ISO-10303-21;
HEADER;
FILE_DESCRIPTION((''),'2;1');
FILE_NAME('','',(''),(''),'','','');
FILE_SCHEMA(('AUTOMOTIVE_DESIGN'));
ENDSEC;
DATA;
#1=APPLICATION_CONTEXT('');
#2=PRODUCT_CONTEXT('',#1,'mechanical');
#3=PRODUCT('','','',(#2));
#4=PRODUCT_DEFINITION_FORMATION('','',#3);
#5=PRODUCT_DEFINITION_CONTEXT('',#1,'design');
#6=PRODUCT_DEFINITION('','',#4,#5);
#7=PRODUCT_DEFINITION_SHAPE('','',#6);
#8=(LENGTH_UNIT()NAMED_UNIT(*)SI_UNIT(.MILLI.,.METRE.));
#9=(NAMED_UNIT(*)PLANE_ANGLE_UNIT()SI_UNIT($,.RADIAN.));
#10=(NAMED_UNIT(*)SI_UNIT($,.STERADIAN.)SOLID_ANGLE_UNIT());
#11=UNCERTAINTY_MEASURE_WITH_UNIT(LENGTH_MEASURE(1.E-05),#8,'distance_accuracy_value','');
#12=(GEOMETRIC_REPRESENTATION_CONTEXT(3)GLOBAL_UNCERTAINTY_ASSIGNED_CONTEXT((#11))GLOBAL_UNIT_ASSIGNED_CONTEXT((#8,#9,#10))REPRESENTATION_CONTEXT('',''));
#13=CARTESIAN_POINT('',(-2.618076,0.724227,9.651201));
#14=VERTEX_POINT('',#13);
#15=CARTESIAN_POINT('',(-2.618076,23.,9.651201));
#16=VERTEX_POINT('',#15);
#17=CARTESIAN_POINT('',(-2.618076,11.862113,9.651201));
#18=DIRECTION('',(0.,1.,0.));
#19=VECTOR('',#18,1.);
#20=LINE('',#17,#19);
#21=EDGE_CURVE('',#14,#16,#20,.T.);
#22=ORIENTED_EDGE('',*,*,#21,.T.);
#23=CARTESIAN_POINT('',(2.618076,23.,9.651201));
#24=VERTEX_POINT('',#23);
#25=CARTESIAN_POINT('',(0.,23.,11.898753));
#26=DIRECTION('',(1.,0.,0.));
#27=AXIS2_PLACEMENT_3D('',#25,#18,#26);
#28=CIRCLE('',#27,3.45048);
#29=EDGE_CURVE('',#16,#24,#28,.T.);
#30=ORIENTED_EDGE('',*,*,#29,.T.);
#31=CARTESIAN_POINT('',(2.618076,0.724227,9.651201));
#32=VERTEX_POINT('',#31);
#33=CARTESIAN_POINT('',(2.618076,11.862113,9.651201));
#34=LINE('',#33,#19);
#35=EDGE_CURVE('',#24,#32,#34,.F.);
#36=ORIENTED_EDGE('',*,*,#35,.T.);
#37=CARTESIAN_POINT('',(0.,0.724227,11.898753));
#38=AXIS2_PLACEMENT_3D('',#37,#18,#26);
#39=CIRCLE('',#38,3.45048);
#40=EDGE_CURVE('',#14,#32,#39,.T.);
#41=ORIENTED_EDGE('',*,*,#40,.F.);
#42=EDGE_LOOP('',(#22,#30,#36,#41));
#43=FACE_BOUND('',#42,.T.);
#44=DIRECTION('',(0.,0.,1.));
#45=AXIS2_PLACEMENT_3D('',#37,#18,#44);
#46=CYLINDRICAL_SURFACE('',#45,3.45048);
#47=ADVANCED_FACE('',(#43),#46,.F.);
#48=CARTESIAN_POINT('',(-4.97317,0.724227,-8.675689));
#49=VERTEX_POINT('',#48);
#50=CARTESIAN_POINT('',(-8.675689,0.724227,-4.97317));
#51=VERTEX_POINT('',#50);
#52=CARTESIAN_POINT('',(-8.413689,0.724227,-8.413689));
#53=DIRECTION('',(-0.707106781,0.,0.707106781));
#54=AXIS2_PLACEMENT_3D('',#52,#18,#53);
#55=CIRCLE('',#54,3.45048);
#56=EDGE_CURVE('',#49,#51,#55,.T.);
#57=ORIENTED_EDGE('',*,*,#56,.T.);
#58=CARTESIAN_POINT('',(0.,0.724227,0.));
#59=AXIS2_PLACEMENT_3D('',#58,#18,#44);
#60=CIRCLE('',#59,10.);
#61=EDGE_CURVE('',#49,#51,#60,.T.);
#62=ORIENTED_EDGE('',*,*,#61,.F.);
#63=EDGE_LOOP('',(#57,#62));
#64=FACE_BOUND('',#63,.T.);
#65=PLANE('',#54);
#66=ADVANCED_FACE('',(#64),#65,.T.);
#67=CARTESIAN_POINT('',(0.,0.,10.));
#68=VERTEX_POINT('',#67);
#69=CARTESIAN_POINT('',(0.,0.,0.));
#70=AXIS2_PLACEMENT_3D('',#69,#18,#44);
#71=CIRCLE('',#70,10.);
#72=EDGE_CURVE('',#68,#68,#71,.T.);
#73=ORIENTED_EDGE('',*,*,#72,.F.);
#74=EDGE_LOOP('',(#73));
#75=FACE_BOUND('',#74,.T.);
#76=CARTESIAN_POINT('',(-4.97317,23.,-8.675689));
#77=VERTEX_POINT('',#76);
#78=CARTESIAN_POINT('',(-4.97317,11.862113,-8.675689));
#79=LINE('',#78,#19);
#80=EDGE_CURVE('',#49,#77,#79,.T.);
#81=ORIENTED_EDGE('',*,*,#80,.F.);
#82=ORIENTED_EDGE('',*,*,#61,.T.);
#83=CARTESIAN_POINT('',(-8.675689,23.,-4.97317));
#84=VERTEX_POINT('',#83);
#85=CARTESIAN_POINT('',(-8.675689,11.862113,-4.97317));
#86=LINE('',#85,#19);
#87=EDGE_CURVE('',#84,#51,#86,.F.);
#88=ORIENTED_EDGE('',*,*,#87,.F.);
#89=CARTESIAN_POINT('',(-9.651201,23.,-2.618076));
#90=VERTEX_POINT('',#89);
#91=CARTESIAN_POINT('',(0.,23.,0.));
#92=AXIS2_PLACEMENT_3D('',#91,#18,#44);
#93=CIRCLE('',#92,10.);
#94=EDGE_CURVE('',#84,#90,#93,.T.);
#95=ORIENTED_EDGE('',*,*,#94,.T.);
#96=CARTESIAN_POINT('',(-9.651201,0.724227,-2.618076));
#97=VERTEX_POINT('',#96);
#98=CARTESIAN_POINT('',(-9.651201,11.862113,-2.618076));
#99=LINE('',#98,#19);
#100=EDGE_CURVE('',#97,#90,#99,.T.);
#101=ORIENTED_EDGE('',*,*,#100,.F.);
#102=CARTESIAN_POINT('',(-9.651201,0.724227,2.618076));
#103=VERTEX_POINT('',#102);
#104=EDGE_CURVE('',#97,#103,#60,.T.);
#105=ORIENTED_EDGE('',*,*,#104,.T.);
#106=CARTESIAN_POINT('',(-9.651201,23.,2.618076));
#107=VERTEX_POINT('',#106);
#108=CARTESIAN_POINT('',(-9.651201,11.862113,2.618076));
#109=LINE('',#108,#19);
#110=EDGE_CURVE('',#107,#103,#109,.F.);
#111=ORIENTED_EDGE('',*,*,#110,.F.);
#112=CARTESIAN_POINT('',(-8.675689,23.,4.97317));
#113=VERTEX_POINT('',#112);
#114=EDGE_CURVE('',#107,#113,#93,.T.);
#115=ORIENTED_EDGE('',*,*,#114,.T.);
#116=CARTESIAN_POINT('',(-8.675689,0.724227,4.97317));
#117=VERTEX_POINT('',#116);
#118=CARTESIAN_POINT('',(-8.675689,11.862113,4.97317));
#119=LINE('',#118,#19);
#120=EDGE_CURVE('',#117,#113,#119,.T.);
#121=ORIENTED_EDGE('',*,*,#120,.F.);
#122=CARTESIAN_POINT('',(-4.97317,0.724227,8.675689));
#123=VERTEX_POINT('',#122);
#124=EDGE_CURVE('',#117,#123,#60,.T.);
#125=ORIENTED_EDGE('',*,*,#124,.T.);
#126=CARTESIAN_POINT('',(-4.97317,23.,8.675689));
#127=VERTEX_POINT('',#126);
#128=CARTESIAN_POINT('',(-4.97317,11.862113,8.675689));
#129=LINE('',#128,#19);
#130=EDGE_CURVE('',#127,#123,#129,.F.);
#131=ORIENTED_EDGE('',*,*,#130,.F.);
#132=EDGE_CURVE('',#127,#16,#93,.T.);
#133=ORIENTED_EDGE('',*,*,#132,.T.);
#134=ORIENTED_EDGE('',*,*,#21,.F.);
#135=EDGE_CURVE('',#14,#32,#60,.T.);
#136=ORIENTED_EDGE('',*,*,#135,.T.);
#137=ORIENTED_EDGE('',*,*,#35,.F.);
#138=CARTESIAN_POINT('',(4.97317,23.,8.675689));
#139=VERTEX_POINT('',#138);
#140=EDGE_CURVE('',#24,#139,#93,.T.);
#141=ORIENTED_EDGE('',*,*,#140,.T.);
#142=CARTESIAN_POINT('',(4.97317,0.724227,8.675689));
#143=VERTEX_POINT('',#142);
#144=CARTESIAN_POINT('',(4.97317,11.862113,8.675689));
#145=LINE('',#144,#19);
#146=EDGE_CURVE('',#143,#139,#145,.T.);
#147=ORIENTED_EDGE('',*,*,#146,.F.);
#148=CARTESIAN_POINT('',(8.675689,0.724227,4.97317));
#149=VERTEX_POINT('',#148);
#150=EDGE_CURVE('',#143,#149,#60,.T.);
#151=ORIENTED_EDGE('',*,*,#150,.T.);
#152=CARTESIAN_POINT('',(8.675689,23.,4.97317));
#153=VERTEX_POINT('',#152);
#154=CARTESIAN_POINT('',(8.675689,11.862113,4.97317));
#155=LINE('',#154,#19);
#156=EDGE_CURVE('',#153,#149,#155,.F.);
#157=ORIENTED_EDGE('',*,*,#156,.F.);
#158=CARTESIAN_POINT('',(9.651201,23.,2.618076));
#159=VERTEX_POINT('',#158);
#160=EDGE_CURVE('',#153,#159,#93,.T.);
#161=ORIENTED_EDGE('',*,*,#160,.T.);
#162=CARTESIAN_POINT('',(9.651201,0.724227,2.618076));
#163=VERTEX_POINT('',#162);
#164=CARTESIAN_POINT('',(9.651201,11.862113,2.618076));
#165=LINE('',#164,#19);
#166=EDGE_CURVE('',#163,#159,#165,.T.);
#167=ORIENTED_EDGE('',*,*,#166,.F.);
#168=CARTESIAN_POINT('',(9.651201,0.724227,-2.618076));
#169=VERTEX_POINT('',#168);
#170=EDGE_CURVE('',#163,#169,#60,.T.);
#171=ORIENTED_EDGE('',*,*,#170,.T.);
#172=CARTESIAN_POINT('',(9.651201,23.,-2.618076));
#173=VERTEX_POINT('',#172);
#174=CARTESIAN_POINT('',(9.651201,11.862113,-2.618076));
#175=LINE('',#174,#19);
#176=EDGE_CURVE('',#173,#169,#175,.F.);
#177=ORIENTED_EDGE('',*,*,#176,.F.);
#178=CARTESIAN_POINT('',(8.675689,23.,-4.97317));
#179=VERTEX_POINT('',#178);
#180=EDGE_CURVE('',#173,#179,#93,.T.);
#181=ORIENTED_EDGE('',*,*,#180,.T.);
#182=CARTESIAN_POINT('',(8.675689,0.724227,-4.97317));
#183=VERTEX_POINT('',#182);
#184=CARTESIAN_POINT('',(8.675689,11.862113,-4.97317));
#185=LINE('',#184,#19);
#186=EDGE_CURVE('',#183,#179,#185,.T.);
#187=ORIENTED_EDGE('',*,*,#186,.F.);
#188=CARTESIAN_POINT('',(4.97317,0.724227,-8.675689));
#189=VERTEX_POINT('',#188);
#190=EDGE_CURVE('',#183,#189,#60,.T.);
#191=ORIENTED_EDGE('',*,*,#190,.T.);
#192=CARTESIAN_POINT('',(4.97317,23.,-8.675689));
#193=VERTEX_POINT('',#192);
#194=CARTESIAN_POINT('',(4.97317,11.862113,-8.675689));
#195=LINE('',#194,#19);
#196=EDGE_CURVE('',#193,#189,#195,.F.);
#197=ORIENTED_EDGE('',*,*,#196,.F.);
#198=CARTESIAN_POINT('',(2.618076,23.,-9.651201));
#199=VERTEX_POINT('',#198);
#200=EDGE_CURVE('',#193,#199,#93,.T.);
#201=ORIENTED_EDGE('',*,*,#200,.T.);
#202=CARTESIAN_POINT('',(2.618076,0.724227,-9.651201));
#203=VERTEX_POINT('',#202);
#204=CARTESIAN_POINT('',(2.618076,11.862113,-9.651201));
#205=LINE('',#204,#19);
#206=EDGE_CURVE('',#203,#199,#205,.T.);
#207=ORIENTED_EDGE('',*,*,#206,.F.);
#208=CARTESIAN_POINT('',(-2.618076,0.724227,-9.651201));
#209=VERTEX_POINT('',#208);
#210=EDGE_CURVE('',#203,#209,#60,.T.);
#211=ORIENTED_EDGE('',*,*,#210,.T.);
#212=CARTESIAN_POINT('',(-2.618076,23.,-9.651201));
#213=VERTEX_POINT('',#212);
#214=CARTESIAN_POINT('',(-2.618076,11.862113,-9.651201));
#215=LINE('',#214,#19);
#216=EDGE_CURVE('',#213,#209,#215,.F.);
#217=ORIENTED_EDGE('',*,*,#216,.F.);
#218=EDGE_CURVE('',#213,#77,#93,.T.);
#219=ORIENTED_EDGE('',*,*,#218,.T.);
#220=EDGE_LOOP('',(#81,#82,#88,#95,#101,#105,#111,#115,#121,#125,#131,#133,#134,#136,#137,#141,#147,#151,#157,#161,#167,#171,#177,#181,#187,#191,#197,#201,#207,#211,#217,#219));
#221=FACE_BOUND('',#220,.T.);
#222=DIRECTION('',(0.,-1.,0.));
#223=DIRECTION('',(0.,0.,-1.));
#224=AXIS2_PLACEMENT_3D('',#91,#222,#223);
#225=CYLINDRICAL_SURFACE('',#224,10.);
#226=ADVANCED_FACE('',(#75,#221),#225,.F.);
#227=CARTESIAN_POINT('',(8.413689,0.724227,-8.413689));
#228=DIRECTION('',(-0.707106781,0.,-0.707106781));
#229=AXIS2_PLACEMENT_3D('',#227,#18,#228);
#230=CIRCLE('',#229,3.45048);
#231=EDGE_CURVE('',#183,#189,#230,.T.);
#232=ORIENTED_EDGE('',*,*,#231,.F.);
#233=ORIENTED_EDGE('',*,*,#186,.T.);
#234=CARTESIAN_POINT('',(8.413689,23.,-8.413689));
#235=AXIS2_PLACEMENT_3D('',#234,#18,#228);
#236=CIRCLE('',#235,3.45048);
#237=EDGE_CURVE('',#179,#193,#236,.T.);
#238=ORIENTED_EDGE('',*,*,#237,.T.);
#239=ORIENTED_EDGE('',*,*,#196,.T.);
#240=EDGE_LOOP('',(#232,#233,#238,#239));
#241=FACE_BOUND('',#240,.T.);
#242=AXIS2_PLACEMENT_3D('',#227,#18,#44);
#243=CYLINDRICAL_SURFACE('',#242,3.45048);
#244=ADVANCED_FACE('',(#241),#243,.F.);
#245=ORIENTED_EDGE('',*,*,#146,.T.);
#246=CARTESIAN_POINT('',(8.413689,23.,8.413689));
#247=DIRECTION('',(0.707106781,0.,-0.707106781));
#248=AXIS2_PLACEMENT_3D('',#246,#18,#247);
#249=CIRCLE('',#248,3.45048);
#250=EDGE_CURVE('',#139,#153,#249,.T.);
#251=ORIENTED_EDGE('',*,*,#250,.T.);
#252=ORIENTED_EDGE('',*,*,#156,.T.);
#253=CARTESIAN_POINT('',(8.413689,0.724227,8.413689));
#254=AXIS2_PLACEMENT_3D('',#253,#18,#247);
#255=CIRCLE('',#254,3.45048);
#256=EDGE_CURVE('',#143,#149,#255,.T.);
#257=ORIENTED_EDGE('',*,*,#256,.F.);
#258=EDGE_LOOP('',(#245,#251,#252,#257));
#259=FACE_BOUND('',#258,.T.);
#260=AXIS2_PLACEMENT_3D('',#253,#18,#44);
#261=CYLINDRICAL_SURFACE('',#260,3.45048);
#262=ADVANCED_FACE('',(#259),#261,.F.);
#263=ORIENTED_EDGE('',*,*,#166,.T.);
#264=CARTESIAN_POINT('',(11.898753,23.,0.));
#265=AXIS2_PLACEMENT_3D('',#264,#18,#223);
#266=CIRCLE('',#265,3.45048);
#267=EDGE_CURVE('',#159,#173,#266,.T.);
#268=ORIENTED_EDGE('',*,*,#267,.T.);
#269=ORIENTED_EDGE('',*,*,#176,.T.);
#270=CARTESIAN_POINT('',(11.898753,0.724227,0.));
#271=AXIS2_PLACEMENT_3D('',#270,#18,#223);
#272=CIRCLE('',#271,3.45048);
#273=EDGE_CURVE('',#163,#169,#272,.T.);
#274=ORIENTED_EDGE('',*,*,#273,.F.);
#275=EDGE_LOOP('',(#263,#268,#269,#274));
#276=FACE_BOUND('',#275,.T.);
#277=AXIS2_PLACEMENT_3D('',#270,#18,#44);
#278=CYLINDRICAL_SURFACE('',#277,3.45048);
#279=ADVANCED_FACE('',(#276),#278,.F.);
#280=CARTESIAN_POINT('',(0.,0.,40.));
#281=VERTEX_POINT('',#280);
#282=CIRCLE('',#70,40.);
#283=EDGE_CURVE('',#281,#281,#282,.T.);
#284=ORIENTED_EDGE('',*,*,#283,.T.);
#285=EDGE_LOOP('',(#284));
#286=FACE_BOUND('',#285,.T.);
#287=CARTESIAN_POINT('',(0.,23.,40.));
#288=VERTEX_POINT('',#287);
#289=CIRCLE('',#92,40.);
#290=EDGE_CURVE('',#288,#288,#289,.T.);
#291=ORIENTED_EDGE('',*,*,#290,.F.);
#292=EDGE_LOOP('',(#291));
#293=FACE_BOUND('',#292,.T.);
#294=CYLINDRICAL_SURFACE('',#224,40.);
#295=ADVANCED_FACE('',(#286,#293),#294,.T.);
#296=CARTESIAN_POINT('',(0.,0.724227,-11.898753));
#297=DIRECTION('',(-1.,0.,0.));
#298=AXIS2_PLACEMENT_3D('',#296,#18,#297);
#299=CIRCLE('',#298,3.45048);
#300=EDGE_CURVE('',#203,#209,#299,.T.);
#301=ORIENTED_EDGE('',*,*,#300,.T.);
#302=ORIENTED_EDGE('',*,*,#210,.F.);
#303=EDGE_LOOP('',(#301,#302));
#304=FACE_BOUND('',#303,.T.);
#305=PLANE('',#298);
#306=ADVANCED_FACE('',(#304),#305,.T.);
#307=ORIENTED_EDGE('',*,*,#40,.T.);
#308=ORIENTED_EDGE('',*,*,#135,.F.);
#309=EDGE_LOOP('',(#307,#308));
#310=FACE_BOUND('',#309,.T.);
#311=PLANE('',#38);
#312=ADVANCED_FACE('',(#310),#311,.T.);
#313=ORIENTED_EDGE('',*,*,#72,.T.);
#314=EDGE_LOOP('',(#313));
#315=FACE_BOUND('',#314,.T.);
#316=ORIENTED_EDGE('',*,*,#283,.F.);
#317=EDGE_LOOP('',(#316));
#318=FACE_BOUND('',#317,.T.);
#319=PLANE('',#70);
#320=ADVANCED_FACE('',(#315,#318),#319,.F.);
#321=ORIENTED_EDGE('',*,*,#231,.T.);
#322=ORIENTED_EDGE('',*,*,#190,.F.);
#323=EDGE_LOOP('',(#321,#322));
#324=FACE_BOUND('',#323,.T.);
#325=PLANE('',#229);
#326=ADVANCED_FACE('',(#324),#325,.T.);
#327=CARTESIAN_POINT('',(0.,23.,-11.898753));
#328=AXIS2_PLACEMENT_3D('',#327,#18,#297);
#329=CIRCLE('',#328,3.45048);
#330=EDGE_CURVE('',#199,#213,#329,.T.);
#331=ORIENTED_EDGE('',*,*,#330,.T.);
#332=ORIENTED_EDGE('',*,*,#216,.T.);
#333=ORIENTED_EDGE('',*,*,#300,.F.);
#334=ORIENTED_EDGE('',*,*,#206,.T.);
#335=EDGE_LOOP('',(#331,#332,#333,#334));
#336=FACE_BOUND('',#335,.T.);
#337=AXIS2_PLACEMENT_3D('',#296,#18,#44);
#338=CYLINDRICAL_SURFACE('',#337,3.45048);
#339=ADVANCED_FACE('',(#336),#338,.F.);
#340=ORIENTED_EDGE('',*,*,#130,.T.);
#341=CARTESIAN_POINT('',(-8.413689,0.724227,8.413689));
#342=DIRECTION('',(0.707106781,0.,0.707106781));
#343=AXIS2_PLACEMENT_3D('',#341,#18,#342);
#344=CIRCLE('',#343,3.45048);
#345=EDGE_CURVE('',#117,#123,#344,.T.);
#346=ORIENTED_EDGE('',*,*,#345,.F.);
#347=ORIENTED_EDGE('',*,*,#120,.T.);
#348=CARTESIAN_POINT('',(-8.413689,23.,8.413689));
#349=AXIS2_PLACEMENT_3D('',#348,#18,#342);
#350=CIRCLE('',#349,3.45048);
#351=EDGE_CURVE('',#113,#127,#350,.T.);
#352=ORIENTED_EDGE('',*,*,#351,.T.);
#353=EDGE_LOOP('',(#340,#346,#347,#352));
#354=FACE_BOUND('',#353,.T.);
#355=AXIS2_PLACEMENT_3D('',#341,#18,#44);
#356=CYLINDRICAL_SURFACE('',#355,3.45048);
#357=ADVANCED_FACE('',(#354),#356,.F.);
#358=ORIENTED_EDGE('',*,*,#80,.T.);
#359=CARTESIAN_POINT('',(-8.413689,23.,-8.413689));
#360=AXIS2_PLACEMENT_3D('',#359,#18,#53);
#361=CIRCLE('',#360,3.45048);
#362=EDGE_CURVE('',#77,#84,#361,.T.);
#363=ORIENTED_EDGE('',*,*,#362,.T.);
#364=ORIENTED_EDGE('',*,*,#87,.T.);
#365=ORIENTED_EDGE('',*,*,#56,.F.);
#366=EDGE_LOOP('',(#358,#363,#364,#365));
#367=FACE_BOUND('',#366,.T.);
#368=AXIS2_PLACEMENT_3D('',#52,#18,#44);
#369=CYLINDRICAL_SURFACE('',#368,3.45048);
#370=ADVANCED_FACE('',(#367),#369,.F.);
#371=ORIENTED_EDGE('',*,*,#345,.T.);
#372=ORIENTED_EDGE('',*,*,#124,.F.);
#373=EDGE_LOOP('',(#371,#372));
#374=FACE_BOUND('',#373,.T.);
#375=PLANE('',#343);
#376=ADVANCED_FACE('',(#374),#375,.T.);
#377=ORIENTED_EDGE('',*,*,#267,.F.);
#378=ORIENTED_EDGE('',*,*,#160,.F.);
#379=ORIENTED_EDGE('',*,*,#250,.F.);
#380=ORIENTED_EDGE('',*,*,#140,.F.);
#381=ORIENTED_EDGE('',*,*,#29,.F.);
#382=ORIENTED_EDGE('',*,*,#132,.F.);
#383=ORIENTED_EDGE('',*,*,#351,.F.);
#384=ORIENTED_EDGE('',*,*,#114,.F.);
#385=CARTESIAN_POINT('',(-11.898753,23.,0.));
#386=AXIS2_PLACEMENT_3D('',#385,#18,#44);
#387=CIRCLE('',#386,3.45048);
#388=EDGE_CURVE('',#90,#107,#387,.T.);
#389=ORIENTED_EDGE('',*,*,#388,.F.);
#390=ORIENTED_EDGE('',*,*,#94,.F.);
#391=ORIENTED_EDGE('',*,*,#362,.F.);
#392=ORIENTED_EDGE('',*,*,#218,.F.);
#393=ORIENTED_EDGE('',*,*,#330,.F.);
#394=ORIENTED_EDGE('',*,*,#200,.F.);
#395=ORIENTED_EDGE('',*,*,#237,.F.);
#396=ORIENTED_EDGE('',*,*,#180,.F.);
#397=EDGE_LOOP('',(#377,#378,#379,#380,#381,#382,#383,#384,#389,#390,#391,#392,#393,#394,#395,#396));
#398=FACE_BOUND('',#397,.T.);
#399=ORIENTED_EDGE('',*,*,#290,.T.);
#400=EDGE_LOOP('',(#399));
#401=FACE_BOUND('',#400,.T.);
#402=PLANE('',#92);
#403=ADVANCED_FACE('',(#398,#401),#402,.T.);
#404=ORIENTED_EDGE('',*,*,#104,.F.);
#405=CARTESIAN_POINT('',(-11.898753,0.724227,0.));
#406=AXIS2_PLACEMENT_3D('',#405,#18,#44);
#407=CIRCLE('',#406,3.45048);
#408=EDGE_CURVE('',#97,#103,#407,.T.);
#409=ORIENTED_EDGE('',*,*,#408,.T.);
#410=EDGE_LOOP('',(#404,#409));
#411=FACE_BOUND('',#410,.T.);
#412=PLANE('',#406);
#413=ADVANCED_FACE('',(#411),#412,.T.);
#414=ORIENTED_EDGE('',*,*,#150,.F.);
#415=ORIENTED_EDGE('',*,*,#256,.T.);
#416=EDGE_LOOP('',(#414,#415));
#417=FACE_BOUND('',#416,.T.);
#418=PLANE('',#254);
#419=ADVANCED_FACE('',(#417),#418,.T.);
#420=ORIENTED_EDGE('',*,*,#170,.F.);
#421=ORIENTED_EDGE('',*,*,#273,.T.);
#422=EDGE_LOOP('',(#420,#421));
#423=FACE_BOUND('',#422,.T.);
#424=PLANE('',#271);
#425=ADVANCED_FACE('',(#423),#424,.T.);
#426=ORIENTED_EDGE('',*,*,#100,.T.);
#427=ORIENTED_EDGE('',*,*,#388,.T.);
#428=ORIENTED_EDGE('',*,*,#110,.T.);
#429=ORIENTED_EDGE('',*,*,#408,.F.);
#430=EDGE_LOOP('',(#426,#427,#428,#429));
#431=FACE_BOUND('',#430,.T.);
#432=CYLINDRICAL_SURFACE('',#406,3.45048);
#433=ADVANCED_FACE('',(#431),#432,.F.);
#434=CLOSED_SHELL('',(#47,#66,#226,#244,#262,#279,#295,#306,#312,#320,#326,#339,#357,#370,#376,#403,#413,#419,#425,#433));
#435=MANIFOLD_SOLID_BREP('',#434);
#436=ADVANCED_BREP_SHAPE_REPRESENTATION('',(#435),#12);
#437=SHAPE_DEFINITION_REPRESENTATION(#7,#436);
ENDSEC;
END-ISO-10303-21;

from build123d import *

# Parameters (mm, degrees)
SKETCH1_R           = 40
BOSS_EXTRUDE1_DEPTH = 23
SKETCH2_R           = 10
CUT_EXTRUDE1_DEPTH  = 62.065538563
SKETCH3_R           = 3.450480334
CUT_EXTRUDE2_DEPTH  = 22.275773443
CIRPATTERN1_COUNT   = 8


with BuildPart() as part:
    # Sketch1 → Boss-Extrude1 (new body)
    with BuildSketch(Plane(origin=(0, 0, 0), x_dir=(1, 0, 0), z_dir=(0, 1, 0))):
        Circle(SKETCH1_R)
    extrude(amount=BOSS_EXTRUDE1_DEPTH)

    # Sketch2 → Cut-Extrude1 (cut, through all)
    with BuildSketch(Plane(origin=(0, 0, 0), x_dir=(1, 0, 0), z_dir=(0, 1, 0))):
        Circle(SKETCH2_R)
    extrude(amount=CUT_EXTRUDE1_DEPTH, mode=Mode.SUBTRACT)

    # Sketch3 → Cut-Extrude2 (cut)
    with BuildSketch(Plane(origin=(0, 23, 0), x_dir=(1, 0, 0), z_dir=(0, 1, 0))):
        with Locations((-11.898753027, 0)):
            Circle(SKETCH3_R)
    cut_extrude2 = extrude(amount=-CUT_EXTRUDE2_DEPTH, mode=Mode.SUBTRACT)

    # CirPattern1: Cut-Extrude2 ×8 about axis
    cirpattern1_axis = Axis((0, 0, 0), (0, 1, 0))
    for i in range(1, CIRPATTERN1_COUNT):
        add(cut_extrude2.rotate(cirpattern1_axis, i * 360 / CIRPATTERN1_COUNT), mode=Mode.SUBTRACT)


solid = part.part
